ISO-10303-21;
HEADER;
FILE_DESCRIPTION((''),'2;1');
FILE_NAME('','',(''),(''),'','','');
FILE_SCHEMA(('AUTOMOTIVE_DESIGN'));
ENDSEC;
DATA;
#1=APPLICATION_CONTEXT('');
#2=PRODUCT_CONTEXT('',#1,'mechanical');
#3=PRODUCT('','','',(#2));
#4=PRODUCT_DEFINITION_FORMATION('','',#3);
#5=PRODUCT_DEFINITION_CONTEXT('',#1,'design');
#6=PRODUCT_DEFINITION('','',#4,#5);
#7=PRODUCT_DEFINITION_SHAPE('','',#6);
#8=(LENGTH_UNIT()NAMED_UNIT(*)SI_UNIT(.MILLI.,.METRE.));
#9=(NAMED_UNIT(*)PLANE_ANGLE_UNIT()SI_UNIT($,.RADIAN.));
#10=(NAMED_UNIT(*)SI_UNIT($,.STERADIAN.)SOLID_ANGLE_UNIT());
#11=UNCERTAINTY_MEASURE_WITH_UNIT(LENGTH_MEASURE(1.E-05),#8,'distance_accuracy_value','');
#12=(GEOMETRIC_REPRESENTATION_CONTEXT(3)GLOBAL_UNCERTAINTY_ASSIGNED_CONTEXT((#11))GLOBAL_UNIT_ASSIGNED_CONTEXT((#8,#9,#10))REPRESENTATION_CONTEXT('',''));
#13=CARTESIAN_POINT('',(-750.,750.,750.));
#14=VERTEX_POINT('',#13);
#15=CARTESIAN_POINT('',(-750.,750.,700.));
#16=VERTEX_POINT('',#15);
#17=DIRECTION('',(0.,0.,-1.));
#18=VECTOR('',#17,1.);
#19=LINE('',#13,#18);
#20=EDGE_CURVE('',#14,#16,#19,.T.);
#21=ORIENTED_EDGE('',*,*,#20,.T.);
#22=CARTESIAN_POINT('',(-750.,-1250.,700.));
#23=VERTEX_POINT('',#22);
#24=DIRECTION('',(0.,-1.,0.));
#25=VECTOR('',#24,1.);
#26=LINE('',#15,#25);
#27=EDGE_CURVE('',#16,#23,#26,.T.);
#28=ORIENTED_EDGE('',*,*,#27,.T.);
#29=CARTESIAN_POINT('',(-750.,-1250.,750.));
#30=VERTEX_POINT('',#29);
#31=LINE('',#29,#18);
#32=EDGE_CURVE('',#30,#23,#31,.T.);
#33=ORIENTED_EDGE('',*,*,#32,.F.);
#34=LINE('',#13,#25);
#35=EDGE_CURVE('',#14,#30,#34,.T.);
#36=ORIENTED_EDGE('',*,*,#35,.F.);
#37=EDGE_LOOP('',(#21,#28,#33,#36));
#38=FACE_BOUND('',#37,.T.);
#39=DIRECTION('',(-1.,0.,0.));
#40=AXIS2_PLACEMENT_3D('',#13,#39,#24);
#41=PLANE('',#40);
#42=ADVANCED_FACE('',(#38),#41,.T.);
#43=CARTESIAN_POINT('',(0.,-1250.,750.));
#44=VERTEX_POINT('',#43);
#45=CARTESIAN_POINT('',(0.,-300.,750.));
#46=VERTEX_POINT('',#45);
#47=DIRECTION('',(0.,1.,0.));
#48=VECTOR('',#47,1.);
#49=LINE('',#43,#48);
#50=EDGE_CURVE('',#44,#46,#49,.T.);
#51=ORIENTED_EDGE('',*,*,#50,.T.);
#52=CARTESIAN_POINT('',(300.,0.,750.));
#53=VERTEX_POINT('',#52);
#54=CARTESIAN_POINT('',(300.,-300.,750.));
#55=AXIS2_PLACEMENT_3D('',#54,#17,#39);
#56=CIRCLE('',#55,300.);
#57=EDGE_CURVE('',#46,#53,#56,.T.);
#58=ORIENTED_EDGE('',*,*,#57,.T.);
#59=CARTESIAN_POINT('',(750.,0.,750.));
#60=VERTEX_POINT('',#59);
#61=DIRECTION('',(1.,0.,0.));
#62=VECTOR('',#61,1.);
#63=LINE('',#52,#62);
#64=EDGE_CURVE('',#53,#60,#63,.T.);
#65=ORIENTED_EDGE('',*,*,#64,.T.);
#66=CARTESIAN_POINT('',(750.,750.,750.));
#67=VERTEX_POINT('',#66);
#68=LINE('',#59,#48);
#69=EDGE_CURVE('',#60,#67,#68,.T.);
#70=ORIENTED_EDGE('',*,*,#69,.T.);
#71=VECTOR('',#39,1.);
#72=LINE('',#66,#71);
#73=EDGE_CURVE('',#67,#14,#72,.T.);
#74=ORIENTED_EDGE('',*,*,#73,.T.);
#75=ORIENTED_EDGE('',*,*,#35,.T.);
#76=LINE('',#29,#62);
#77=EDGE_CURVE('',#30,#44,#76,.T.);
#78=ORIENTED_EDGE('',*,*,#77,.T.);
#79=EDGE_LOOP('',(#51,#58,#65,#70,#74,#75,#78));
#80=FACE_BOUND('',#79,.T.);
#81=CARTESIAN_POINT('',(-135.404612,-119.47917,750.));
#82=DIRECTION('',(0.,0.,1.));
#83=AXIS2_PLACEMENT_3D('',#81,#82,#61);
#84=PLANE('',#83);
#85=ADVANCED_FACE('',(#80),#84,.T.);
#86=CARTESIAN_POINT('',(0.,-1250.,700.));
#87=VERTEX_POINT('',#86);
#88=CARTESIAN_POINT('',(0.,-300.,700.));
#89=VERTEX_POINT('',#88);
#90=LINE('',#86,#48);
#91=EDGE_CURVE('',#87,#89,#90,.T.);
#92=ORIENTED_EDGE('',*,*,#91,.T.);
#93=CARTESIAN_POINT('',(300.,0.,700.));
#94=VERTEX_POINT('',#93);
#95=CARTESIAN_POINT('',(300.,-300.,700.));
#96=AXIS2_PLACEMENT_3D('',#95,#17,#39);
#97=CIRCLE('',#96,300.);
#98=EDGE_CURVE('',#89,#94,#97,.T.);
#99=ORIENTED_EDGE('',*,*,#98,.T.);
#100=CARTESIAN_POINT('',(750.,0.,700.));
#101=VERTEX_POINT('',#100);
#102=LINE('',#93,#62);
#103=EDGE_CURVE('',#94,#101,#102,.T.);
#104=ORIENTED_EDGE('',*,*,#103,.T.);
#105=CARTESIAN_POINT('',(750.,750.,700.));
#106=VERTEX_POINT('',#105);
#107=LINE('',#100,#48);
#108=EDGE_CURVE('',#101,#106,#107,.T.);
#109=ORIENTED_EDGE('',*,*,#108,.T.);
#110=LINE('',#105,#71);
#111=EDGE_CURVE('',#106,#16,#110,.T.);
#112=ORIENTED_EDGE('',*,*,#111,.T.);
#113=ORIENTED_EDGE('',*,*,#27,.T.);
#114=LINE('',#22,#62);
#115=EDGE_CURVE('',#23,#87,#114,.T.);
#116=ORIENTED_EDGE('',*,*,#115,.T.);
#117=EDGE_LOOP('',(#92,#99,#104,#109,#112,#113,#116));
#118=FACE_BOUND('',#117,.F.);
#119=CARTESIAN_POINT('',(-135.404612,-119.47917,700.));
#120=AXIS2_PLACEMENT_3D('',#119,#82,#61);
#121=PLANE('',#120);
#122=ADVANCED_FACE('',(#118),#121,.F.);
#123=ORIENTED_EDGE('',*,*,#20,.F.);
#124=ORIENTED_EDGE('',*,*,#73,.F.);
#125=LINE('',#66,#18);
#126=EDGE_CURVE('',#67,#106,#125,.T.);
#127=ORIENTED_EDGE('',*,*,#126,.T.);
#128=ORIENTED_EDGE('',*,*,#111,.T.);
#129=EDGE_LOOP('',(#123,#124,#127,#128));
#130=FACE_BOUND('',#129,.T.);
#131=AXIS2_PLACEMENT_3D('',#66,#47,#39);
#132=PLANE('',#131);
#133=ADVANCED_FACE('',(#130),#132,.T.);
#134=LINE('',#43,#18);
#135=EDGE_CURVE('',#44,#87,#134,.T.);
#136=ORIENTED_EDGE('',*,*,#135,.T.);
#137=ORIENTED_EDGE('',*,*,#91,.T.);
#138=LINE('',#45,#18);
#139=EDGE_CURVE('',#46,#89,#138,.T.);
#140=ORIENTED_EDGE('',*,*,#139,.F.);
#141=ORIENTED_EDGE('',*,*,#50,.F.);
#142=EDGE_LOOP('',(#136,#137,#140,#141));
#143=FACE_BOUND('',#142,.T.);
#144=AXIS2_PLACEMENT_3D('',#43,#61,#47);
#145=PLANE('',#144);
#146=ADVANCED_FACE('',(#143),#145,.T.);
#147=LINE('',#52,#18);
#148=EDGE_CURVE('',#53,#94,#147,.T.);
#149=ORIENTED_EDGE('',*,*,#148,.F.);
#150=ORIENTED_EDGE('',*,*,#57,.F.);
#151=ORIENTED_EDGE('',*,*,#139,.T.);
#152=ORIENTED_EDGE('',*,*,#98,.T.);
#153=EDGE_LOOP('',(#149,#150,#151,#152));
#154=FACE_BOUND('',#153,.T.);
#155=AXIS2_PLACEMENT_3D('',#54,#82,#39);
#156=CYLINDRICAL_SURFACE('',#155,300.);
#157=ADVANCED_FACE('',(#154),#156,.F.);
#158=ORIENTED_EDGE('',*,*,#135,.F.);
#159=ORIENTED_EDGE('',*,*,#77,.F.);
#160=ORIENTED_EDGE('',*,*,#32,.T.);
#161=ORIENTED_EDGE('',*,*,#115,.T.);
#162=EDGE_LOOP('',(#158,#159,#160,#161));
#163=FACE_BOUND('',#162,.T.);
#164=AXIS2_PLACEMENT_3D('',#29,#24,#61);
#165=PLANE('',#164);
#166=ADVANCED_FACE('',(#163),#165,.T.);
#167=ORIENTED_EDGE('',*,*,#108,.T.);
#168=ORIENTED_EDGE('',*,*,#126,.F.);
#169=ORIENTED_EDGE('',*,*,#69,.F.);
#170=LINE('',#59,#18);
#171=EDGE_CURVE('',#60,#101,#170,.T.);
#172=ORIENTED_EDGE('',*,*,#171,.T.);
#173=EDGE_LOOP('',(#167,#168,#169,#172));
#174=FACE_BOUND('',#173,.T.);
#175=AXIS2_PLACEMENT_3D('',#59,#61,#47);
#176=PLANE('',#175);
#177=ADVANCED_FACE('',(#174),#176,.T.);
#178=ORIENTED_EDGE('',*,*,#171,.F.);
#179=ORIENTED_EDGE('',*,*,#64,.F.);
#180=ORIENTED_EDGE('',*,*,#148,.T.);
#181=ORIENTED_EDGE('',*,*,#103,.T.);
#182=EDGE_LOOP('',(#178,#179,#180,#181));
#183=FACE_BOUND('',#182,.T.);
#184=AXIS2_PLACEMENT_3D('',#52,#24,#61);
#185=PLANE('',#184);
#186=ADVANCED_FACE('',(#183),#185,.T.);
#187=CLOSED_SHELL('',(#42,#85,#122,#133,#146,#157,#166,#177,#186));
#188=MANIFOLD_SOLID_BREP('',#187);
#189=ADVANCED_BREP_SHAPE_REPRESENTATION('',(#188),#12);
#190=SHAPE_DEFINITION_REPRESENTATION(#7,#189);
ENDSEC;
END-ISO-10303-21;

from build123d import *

# Parameters (mm, degrees)
F9_DEPTH = 50


# Not quite as in the source:
# - the program builds the solid bodies; features that only make, move or delete a surface that nothing else refers to are left out


with BuildPart() as f9:
    # F3 (on offset) → F9 (new body)
    with BuildSketch(Plane.XY.offset(750)):
        with BuildLine():
            ThreePointArc((0, -300), (87.867965644, -87.867965644), (300, 0))
            Line((300, 0), (750, 0))
            Line((750, 0), (750, 750))
            Line((750, 750), (-750, 750))
            Line((-750, 750), (-750, -1250))
            Line((-750, -1250), (0, -1250))
            Line((0, -1250), (0, -300))
        make_face()
    extrude(amount=-F9_DEPTH)


solid = f9.part
